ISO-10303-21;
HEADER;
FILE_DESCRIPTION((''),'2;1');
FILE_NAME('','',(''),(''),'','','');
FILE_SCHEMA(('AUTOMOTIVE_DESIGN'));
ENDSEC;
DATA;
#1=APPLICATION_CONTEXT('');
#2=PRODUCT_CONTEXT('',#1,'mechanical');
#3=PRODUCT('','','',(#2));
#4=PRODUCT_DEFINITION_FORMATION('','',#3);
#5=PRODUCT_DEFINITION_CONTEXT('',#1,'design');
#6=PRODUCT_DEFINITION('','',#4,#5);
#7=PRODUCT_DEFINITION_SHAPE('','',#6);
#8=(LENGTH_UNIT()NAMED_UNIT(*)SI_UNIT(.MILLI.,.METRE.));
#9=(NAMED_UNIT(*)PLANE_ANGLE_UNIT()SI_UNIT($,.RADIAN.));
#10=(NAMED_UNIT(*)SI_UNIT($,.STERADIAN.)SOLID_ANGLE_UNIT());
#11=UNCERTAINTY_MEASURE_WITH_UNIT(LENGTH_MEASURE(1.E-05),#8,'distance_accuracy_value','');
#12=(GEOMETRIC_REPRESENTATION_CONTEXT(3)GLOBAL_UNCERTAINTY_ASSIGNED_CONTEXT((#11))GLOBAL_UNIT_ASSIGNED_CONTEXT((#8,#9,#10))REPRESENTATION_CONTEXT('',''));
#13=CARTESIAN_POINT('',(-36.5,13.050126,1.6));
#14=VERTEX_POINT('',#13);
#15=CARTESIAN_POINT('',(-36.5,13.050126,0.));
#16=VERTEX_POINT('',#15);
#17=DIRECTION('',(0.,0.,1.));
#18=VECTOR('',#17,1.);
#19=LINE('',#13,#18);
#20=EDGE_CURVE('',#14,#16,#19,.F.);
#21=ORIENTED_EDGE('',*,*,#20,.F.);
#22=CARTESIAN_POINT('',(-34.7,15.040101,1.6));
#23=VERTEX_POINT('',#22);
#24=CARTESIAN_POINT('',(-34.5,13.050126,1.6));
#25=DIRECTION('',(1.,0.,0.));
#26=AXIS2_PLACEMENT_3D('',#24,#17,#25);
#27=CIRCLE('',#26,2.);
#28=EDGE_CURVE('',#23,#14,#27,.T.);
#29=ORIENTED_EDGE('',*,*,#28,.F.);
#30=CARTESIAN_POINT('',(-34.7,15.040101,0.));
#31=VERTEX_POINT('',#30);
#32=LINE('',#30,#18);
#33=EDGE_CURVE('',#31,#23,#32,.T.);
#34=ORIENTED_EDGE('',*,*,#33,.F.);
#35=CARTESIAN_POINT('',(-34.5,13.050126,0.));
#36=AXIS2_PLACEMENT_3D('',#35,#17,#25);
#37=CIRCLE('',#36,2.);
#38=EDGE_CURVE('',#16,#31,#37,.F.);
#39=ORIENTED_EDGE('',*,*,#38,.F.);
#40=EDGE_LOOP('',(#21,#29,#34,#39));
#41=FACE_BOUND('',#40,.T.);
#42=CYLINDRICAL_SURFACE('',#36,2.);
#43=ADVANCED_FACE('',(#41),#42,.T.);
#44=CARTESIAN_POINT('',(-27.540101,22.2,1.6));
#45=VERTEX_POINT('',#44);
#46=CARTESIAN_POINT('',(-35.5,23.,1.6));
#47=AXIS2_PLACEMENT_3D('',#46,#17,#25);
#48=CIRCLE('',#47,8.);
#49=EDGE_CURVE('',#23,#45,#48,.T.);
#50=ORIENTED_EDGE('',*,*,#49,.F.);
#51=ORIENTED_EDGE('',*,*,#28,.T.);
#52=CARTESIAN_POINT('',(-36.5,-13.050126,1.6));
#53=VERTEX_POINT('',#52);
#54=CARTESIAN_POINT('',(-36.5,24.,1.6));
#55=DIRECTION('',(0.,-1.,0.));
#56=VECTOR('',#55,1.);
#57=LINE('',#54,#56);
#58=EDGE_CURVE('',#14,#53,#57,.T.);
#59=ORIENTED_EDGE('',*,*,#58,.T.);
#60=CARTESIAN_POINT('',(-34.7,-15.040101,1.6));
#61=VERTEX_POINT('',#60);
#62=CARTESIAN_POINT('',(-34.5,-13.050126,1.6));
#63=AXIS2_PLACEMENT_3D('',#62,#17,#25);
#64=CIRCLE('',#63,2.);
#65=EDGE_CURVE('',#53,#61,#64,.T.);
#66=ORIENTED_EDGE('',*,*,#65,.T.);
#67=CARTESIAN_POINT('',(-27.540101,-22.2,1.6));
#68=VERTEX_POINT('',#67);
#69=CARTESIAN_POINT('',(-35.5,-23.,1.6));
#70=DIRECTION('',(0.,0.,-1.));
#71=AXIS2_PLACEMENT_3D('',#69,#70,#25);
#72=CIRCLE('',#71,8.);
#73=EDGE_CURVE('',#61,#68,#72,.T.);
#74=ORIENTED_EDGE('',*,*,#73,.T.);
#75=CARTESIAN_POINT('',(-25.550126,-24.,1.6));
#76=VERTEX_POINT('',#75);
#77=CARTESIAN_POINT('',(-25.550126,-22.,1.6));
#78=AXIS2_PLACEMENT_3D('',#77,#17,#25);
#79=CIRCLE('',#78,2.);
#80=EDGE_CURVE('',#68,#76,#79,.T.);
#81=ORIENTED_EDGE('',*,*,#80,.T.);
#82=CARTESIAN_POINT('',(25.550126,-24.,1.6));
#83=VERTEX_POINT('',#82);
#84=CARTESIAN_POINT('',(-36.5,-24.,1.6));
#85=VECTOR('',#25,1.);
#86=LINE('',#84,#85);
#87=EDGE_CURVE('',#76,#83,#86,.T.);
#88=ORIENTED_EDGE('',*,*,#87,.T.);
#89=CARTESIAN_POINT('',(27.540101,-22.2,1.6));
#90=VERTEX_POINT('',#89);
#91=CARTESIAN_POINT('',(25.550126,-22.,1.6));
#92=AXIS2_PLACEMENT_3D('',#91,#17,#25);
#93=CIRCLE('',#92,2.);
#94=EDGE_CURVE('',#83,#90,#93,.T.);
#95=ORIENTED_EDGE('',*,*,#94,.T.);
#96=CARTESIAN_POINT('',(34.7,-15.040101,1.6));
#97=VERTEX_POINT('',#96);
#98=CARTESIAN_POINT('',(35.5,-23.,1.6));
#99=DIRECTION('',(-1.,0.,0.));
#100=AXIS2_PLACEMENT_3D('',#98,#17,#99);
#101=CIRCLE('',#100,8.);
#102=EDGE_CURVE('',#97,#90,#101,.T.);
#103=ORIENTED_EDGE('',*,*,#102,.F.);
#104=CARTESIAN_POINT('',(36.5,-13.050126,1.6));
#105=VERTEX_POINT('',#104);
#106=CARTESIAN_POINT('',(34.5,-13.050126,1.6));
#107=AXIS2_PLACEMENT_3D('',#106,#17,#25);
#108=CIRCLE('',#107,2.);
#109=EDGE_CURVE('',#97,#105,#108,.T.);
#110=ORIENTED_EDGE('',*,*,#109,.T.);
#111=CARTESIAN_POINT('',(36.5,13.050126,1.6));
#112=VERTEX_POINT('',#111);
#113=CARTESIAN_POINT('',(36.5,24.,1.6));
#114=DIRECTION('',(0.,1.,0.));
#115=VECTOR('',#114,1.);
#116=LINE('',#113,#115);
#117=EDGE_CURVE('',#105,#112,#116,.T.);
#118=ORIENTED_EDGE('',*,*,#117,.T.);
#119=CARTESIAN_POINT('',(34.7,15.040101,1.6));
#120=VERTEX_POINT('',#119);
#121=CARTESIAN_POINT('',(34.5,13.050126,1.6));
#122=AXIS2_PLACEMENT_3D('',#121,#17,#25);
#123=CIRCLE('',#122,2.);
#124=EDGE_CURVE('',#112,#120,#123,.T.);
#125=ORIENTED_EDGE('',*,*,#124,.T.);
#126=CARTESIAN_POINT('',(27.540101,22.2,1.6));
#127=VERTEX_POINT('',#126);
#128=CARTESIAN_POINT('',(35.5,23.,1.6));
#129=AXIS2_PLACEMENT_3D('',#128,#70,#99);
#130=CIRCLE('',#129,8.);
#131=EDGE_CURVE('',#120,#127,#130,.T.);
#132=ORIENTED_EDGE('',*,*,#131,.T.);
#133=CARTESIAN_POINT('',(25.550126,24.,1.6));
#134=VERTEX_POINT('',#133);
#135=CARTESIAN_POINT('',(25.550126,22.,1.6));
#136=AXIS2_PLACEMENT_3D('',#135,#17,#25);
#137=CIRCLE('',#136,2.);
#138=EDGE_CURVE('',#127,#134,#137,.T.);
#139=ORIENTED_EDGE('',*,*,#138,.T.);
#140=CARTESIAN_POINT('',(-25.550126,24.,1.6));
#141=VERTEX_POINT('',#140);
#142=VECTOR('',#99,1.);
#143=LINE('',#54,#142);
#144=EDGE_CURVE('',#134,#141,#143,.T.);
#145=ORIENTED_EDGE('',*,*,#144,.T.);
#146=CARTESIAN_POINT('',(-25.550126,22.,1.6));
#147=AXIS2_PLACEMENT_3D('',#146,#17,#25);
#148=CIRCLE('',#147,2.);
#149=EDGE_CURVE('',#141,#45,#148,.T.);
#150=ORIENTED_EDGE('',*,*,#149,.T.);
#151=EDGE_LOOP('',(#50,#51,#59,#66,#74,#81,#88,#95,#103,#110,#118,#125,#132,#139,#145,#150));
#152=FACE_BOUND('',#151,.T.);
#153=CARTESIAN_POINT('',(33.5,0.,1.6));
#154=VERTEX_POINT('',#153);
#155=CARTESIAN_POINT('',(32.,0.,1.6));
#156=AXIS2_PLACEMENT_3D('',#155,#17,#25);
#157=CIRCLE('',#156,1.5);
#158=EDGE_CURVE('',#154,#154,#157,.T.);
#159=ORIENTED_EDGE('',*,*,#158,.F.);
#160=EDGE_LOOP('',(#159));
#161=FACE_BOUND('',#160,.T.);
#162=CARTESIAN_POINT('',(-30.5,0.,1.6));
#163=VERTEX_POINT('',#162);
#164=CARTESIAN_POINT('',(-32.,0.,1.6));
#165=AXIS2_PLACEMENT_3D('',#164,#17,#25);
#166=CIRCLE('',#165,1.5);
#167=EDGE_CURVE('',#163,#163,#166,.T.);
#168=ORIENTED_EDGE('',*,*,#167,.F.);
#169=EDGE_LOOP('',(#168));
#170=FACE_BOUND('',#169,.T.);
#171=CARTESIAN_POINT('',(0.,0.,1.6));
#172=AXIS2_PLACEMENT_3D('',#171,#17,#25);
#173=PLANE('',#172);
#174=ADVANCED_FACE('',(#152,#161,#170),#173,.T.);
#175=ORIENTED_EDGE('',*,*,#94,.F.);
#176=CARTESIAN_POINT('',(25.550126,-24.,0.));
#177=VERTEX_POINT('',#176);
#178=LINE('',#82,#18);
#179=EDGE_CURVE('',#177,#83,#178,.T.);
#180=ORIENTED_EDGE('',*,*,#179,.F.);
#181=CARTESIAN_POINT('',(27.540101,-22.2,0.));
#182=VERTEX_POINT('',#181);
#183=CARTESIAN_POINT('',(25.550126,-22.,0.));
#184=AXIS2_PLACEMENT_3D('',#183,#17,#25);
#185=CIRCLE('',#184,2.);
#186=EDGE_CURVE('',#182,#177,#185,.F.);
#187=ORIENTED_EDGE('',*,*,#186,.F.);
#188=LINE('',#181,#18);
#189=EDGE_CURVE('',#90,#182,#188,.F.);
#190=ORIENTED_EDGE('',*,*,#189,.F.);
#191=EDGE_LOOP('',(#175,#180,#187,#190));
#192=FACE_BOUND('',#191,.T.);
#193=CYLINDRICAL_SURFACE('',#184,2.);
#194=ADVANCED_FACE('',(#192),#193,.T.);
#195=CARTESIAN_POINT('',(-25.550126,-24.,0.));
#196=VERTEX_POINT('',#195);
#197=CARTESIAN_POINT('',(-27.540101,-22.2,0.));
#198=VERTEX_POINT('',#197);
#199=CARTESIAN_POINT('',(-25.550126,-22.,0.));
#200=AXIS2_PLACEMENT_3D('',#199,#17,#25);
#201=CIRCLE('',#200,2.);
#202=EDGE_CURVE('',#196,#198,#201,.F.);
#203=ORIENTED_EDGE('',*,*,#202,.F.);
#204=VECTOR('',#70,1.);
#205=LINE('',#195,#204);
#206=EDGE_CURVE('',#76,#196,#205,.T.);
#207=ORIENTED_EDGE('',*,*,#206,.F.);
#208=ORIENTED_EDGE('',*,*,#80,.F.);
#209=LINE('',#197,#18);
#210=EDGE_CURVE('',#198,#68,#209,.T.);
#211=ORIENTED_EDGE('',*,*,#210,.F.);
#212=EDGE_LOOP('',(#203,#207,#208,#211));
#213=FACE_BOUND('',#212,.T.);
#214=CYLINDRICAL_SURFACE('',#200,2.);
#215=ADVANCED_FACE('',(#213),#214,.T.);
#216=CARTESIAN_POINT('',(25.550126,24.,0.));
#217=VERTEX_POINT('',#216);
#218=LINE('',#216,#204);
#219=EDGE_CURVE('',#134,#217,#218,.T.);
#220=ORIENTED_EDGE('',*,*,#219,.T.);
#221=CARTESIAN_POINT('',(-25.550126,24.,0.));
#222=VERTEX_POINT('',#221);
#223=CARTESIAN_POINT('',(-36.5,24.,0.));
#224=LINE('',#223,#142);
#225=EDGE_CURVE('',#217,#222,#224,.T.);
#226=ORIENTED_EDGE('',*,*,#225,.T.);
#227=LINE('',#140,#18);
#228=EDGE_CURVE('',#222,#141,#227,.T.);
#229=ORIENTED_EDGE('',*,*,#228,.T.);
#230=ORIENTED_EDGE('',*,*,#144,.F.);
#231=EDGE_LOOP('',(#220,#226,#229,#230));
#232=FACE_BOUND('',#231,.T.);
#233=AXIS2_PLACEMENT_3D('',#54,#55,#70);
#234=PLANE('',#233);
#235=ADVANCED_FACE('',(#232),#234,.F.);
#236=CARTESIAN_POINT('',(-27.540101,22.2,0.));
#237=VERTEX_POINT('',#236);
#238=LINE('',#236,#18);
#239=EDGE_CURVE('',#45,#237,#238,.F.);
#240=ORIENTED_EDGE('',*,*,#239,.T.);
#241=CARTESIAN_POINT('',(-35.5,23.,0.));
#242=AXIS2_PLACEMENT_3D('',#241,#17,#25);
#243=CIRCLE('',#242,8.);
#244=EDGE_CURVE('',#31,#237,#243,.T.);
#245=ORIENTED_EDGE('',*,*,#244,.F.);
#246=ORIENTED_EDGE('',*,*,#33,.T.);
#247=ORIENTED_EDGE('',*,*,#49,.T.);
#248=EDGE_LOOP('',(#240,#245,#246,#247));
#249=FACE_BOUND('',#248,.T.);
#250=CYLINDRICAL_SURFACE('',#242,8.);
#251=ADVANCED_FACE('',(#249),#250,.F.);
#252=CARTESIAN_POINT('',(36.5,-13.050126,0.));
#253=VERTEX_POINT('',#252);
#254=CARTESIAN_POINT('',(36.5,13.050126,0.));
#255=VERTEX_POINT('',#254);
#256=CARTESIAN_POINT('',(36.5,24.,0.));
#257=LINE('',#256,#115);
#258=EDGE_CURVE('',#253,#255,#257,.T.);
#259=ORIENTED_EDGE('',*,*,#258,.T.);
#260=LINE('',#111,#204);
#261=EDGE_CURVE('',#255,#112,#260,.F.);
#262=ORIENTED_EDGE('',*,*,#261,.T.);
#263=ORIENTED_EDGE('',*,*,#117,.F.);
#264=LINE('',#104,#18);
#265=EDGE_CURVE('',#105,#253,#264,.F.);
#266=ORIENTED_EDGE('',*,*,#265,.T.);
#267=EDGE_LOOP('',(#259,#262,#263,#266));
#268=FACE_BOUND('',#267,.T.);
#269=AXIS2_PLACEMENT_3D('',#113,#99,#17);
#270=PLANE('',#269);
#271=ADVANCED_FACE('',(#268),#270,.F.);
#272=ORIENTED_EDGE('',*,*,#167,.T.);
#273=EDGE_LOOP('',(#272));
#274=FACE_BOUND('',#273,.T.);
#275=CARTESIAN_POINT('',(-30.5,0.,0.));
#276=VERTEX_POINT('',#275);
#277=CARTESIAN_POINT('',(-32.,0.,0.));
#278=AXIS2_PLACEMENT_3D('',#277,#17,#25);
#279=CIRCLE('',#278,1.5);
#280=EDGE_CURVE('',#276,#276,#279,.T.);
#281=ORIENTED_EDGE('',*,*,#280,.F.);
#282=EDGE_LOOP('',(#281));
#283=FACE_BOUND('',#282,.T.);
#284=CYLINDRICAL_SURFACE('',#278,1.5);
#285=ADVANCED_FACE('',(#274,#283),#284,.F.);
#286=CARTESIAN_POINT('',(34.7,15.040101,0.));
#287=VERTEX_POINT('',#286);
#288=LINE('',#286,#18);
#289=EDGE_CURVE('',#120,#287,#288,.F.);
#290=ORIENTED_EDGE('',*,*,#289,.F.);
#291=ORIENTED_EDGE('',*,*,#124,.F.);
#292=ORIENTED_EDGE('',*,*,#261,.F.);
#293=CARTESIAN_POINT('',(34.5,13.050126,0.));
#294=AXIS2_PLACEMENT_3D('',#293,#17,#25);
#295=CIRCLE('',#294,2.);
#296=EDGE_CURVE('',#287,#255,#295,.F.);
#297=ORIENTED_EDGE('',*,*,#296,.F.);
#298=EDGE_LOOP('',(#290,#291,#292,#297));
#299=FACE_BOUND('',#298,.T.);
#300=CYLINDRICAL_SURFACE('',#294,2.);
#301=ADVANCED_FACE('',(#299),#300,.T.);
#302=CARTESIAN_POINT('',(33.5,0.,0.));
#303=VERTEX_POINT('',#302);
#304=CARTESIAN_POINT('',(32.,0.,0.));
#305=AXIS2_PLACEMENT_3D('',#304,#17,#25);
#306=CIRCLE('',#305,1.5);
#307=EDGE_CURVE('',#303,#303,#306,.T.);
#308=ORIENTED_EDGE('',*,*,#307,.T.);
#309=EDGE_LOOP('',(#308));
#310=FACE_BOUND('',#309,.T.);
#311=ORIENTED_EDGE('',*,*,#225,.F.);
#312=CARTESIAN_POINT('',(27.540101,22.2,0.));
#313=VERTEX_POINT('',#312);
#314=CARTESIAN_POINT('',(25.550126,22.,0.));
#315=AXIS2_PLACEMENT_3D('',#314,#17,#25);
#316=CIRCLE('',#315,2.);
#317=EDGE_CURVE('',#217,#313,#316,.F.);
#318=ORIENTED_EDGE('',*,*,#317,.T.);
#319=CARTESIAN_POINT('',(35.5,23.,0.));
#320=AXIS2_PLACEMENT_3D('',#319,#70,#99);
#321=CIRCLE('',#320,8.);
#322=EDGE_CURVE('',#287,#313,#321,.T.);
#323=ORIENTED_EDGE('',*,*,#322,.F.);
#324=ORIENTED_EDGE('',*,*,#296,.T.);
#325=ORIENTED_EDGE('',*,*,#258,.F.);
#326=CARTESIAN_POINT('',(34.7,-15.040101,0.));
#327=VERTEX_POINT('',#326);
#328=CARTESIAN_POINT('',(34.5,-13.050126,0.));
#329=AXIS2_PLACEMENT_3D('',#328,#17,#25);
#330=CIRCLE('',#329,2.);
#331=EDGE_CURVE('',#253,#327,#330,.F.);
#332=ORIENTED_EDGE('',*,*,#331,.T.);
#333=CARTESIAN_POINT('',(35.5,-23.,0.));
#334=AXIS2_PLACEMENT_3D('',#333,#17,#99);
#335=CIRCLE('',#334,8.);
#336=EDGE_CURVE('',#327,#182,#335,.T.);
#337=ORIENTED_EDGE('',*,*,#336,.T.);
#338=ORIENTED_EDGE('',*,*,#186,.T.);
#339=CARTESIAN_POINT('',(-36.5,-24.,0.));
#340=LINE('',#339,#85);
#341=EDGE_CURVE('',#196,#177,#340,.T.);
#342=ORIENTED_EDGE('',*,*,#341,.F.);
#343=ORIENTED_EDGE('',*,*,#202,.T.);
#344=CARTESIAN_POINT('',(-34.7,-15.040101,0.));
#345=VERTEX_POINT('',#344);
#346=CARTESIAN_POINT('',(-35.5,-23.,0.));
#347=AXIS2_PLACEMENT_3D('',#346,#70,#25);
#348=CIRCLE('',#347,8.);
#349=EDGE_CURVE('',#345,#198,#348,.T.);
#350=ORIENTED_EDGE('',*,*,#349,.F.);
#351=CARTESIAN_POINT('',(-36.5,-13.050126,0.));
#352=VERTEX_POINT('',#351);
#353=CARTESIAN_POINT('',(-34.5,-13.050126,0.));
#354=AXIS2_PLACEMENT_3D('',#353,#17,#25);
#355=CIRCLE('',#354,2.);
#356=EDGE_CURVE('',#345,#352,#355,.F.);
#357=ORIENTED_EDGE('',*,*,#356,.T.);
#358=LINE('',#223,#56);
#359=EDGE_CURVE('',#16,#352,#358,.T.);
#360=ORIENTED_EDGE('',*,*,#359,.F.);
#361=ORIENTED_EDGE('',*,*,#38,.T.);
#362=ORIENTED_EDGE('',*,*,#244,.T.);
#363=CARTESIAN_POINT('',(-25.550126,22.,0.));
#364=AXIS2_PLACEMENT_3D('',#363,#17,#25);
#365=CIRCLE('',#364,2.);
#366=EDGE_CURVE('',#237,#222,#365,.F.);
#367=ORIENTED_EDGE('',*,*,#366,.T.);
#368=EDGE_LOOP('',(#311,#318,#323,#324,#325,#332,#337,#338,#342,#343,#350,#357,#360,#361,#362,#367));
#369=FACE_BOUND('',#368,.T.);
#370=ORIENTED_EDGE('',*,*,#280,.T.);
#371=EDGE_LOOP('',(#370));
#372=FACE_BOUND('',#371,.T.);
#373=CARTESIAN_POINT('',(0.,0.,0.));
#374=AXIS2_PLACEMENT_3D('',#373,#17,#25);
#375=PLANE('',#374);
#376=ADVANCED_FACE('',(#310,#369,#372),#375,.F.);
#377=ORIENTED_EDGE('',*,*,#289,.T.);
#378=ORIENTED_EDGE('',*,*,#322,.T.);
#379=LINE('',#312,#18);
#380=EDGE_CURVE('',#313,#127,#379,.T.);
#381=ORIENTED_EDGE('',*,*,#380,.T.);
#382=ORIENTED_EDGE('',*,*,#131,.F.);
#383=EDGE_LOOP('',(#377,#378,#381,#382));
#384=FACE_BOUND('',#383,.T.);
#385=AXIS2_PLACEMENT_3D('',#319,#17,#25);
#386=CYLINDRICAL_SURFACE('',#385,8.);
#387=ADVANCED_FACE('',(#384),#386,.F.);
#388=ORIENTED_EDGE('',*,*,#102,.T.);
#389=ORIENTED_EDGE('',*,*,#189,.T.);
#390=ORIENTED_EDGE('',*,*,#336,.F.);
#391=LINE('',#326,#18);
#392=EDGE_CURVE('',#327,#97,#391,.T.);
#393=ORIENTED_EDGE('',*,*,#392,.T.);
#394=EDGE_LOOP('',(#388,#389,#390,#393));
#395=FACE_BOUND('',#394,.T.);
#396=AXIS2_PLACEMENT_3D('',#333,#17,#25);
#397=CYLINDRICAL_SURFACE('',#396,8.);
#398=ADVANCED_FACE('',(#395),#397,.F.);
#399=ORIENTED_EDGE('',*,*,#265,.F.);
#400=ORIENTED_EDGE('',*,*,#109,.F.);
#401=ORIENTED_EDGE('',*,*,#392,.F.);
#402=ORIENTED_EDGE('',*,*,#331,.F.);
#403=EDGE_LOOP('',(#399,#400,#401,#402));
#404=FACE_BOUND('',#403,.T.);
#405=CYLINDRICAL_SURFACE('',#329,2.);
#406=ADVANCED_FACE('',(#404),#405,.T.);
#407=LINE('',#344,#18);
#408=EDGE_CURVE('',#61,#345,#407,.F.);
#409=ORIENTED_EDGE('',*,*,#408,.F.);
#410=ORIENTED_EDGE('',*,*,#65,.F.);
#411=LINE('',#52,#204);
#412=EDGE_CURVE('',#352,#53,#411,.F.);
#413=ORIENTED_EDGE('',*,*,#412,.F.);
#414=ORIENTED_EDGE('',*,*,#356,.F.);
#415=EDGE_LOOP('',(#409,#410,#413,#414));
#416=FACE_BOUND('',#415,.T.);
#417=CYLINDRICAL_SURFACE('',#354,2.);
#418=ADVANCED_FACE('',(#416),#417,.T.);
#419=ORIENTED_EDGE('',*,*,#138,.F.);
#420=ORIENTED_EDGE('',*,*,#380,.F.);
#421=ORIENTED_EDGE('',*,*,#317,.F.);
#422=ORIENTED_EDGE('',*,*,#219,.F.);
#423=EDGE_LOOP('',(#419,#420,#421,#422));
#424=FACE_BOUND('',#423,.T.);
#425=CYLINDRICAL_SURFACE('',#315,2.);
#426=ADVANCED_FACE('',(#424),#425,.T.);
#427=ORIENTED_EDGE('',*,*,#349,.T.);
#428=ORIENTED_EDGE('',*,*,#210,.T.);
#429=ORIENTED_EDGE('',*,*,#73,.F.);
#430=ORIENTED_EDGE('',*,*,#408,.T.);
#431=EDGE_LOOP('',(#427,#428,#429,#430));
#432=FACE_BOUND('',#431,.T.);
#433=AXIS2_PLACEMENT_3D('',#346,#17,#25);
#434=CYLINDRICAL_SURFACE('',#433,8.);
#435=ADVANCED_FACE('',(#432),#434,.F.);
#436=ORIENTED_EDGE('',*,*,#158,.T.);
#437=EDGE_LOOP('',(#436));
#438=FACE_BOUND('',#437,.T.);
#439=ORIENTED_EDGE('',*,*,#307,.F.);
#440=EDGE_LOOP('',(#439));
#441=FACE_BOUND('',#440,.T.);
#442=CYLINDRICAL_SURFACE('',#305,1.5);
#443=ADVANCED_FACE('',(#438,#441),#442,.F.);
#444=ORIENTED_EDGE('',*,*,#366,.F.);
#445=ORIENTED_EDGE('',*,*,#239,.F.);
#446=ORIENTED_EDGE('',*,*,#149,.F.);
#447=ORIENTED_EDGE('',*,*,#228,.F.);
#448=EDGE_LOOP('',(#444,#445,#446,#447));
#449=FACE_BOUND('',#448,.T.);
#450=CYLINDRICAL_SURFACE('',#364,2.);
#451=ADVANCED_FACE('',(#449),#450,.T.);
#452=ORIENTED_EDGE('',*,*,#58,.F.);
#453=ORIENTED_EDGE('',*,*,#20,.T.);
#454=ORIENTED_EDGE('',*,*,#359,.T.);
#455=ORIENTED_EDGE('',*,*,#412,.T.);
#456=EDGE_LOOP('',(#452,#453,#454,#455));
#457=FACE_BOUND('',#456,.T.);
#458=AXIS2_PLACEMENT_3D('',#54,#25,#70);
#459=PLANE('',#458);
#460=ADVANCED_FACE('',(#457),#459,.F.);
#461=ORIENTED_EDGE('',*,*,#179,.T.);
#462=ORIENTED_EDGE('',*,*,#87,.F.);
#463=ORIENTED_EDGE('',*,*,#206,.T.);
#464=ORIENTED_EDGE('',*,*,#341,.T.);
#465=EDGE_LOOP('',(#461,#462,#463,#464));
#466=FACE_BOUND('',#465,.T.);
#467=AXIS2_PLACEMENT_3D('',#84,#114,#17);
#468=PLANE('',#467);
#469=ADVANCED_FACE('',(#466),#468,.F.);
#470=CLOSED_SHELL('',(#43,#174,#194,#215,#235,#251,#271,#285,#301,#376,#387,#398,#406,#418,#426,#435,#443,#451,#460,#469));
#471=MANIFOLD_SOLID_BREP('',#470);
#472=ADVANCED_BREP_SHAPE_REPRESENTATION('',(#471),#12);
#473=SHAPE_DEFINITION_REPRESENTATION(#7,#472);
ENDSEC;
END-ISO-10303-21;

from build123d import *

# Parameters (mm, degrees)
SKETCH1_W                                = 73
SKETCH1_H                                = 48
BOSS_EXTRUDE1_DEPTH                      = 1.6
CUT_EXTRUDE1_DEPTH                       = 44.712812767
MIRROR1_AT_THE_SECOND_PLANE_COPY_1_DEPTH = 44.712812767
FILLET1_R                                = 2
SKETCH3_R                                = 1.5
CUT_EXTRUDE2_DEPTH                       = 44.712812767


with BuildPart() as part:
    # Sketch1 → Boss-Extrude1 (new body)
    with BuildSketch(Plane.XY):
        Rectangle(SKETCH1_W, SKETCH1_H)
    extrude(amount=BOSS_EXTRUDE1_DEPTH)

    # Sketch2 → Cut-Extrude1 (cut, through all)
    with BuildSketch(Plane.XY.offset(1.6)):
        with BuildLine():
            Line((-27.5, 23), (-27.5, 24))
            Line((-27.5, 24), (-36.5, 24))
            Line((-36.5, 24), (-36.5, 15))
            Line((-36.5, 15), (-35.5, 15))
            ThreePointArc((-35.5, 15), (-29.843145751, 17.343145751), (-27.5, 23))
        make_face()
    cut_extrude1 = extrude(amount=-CUT_EXTRUDE1_DEPTH, mode=Mode.SUBTRACT)

    # Mirror1: Cut-Extrude1 across plane
    add(cut_extrude1.mirror(Plane(origin=(0, 0, 0), x_dir=(0, 0, 1), z_dir=(1, 0, 0))), mode=Mode.SUBTRACT)

    # Mirror1 at the second plane: Cut-Extrude1 across plane
    add(cut_extrude1.mirror(Plane.ZX), mode=Mode.SUBTRACT)

    # Mirror1 at the second plane copy 1 sketc → Mirror1 at the second plane copy 1 (cut, through all)
    with BuildSketch(Plane(origin=(0, 0, 1.6), x_dir=(-1, 0, 0), z_dir=(0, 0, 1))):
        with BuildLine():
            Line((-27.5, 23), (-27.5, 24))
            Line((-27.5, 24), (-36.5, 24))
            Line((-36.5, 24), (-36.5, 15))
            Line((-36.5, 15), (-35.5, 15))
            ThreePointArc((-35.5, 15), (-29.843145751, 17.343145751), (-27.5, 23))
        make_face()
    extrude(amount=-MIRROR1_AT_THE_SECOND_PLANE_COPY_1_DEPTH, mode=Mode.SUBTRACT)

    # Fillet1
    # the kernel refuses this fillet: 2 mm, written as the material it takes off along each edge
    with BuildSketch(Plane(origin=(-36.5, 15, 6.474685928), x_dir=(0.9997519364152339, 0.022272530929157337, 0), z_dir=(0, 0, -1)), Plane(origin=(-27.5, -24, 6.474685928), x_dir=(-0.022272530929167148, 0.9997519364152335, 0), z_dir=(0, 0, -1)), Plane(origin=(36.5, -15, 6.474685928), x_dir=(-0.9997519364152339, -0.022272530929157337, 0), z_dir=(0, 0, -1))) as fillet1_piece_1:
        with BuildLine():
            CenterArc((1.956075236, 1.99393574), FILLET1_R, 181.276227552, 84.260829523)
            Line((-0.043428637, 1.949390678), (-0.243379025, 1.944936172))
            Line((-0.243379025, 1.944936172), (-0.199950387, -0.004454506))
            Line((-0.199950387, -0.004454506), (0.004454506, -0.199950387))
            ThreePointArc((0.004454506, -0.199950387), (1.004206443, -0.177677856), (1.784883764, -0.199393574))
            Line((1.784883764, -0.199393574), (1.800446625, 0))
        make_face()
    extrude(amount=11.349371855, mode=Mode.SUBTRACT)
    with BuildSketch(Plane(origin=(-27.5, 24, 6.474685928), x_dir=(1, 0, 0), z_dir=(0, 0, -1)), Plane(origin=(-36.5, -15, 6.474685928), x_dir=(0, 1, 0), z_dir=(0, 0, -1)), Plane(origin=(36.5, 15, 6.474685928), x_dir=(0, -1, 0), z_dir=(0, 0, -1)), Plane(origin=(27.5, -24, 6.474685928), x_dir=(-1, 0, 0), z_dir=(0, 0, -1))) as fillet1_piece_2:
        with BuildLine():
            CenterArc((1.949874371, 2), FILLET1_R, 185.739170477, 84.260829523)
            Line((-0.040100503, 1.8), (-0.239097991, 1.78))
            ThreePointArc((-0.239097991, 1.78), (-0.2, 1), (-0.2, 0))
            Line((-0.2, 0), (0, -0.2))
            Line((0, -0.2), (1.949874371, -0.2))
            Line((1.949874371, -0.2), (1.949874371, 0))
        make_face()
    extrude(amount=11.349371855, mode=Mode.SUBTRACT)
    with BuildSketch(Plane(origin=(27.5, 24, 6.474685928), x_dir=(-1, 0, 0), z_dir=(0, 0, -1))) as fillet1_piece_3:
        with BuildLine():
            CenterArc((1.949874371, -2), FILLET1_R, 90, 84.260829523)
            Line((-0.040100503, -1.8), (-0.239097991, -1.78))
            ThreePointArc((-0.239097991, -1.78), (-0.2, -1), (-0.2, 0))
            Line((-0.2, 0), (0, 0.2))
            Line((0, 0.2), (1.949874371, 0.2))
            Line((1.949874371, 0.2), (1.949874371, 0))
        make_face()
    extrude(amount=11.349371855, mode=Mode.SUBTRACT)

    # Sketch3 → Cut-Extrude2 (cut, through all)
    with BuildSketch(Plane.XY.offset(1.6)):
        with Locations((-32, 0)):
            Circle(SKETCH3_R)
        with Locations((32, 0)):
            Circle(SKETCH3_R)
    extrude(amount=-CUT_EXTRUDE2_DEPTH, mode=Mode.SUBTRACT)


solid = part.part
